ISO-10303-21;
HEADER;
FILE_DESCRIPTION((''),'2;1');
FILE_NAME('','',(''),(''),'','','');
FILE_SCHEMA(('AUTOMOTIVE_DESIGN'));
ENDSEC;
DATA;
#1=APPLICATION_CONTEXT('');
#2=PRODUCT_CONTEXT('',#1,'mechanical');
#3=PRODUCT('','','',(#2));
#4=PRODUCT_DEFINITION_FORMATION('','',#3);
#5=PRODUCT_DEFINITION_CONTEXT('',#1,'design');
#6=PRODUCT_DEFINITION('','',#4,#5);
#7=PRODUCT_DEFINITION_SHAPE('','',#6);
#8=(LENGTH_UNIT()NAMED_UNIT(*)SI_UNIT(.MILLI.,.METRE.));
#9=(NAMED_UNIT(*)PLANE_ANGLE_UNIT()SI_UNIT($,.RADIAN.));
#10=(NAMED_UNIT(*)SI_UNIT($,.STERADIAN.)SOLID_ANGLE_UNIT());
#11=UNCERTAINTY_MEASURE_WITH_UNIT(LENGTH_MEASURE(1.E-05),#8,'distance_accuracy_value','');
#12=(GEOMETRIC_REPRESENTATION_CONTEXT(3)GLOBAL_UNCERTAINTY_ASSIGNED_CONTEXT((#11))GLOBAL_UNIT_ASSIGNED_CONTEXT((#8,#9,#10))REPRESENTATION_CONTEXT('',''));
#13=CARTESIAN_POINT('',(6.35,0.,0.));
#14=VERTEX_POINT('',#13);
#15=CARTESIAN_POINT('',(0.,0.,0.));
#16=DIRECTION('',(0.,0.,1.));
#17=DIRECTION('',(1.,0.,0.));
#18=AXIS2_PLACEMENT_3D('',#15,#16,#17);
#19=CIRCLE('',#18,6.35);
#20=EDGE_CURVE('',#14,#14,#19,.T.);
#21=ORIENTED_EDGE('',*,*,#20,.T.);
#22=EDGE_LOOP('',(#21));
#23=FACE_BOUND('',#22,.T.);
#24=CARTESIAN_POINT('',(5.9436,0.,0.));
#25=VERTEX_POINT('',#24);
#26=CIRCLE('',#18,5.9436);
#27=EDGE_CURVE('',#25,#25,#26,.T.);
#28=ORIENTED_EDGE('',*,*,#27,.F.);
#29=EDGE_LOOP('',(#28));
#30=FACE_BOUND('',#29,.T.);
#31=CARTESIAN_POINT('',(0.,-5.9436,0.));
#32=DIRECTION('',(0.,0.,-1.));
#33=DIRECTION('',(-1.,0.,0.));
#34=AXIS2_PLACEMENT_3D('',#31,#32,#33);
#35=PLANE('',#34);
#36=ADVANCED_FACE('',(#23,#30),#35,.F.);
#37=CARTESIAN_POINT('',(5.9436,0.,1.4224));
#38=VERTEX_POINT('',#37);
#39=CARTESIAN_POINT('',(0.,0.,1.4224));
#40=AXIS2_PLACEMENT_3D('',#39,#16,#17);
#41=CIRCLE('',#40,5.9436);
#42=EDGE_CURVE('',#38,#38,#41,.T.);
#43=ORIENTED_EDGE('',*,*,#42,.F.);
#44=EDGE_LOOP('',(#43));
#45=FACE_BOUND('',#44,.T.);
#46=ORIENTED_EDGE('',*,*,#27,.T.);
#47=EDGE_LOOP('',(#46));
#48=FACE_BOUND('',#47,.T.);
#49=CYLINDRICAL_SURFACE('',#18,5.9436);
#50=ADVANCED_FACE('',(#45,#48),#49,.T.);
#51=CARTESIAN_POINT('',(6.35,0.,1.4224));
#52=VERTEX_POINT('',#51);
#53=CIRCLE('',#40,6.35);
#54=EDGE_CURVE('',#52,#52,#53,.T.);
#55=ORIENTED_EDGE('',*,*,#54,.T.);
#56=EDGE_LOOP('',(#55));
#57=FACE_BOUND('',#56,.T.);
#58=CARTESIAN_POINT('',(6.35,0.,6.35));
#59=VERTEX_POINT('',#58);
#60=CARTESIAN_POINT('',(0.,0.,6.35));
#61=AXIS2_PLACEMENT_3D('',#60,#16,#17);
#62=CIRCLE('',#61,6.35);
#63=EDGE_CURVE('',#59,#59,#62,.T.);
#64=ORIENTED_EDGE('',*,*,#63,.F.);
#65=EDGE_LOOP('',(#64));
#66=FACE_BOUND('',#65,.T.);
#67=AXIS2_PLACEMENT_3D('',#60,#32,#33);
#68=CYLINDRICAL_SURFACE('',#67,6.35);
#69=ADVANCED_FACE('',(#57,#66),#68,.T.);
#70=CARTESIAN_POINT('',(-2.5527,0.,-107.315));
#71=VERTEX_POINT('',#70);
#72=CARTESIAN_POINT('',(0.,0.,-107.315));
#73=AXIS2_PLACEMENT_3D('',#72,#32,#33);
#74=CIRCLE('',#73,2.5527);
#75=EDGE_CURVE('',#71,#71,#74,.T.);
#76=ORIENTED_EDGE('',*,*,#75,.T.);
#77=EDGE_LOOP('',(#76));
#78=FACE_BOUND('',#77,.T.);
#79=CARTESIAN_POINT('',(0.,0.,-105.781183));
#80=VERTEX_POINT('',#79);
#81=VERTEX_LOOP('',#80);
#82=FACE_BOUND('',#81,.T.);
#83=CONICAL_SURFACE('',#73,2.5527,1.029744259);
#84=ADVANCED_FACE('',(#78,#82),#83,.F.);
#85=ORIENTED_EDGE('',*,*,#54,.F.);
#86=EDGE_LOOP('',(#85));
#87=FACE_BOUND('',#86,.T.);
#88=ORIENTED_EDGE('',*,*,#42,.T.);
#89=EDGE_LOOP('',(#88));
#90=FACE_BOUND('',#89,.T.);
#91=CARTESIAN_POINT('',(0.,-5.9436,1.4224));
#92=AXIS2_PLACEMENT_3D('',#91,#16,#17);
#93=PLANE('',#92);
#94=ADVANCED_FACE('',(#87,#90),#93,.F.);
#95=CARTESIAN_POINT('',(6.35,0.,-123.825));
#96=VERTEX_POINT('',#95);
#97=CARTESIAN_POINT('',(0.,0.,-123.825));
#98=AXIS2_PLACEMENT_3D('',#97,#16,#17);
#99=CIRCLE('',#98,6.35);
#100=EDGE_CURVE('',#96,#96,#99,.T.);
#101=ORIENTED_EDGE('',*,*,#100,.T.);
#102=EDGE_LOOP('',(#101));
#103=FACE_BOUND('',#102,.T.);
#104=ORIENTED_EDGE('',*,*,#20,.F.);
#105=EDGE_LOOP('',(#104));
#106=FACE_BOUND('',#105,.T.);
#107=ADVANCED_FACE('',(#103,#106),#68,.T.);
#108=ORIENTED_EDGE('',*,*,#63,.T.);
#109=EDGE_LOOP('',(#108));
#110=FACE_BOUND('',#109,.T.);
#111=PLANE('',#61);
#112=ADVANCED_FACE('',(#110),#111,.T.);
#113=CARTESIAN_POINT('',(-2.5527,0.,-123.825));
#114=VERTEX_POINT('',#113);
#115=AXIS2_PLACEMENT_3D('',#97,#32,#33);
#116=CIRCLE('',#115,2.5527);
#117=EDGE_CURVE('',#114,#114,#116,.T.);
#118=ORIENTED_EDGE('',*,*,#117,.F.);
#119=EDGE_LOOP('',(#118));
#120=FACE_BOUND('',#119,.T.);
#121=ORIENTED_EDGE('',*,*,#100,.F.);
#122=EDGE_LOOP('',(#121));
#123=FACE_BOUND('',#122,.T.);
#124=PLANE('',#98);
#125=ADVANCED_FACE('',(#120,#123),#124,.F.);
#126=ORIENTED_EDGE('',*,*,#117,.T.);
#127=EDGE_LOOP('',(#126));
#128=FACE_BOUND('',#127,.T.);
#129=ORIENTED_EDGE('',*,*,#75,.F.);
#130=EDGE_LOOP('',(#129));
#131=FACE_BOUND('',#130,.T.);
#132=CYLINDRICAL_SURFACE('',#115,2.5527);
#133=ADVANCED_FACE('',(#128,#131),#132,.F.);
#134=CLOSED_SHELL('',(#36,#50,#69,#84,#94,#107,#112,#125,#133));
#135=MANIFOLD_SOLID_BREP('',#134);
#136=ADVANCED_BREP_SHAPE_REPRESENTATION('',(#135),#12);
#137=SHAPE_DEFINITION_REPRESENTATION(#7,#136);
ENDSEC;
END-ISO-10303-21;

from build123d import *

# Parameters (mm, degrees)
BOSS_EXTRUDE1_START         = -123.825
BOSS_EXTRUDE1_OUTLINE_R     = 6.35
BOSS_EXTRUDE1_DEPTH         = 130.175
SKETCH5_W                   = 1.4224
SKETCH5_H                   = 0.4064
F_1_4_20_TAPPED_HOLE1_D     = 5.1054
F_1_4_20_TAPPED_HOLE1_DEPTH = 16.51
F_1_4_20_TAPPED_HOLE1_TIP   = 1.533816902


# Read off the part's stored shape, not the designer's step: Boss-Extrude1
with BuildPart() as part:
    # Boss-Extrude1 outline → Boss-Extrude1 (new body)
    with BuildSketch(Plane.XY.offset(BOSS_EXTRUDE1_START)):
        Circle(BOSS_EXTRUDE1_OUTLINE_R)
    extrude(amount=BOSS_EXTRUDE1_DEPTH)

    # Sketch5 → Cut-Revolve1 (revolve, cut)
    with BuildSketch(Plane(origin=(0, 0, 0), x_dir=(0, 0, -1), z_dir=(1, 0, 0)), mode=Mode.PRIVATE) as cut_revolve1_sk:
        with Locations((-0.7112, -6.1468)):
            Rectangle(SKETCH5_W, SKETCH5_H)
    revolve(cut_revolve1_sk.sketch.rotate(Axis((0, 0, 0), (0, 0, -1)), 270), axis=Axis((0, 0, 0), (0, 0, -1)), mode=Mode.SUBTRACT)

    # 1/4-20 Tapped Hole1
    with Locations(Plane(origin=(0, 0, -123.825), x_dir=(-1, 0, 0), z_dir=(0, 0, -1))):
        with Locations((0, 0)):
            Hole(F_1_4_20_TAPPED_HOLE1_D / 2, depth=F_1_4_20_TAPPED_HOLE1_DEPTH)
            with Locations((0, 0, -(F_1_4_20_TAPPED_HOLE1_DEPTH + F_1_4_20_TAPPED_HOLE1_TIP / 2))):  # 118° drill point
                Cone(0, F_1_4_20_TAPPED_HOLE1_D / 2, F_1_4_20_TAPPED_HOLE1_TIP, mode=Mode.SUBTRACT)


solid = part.part
